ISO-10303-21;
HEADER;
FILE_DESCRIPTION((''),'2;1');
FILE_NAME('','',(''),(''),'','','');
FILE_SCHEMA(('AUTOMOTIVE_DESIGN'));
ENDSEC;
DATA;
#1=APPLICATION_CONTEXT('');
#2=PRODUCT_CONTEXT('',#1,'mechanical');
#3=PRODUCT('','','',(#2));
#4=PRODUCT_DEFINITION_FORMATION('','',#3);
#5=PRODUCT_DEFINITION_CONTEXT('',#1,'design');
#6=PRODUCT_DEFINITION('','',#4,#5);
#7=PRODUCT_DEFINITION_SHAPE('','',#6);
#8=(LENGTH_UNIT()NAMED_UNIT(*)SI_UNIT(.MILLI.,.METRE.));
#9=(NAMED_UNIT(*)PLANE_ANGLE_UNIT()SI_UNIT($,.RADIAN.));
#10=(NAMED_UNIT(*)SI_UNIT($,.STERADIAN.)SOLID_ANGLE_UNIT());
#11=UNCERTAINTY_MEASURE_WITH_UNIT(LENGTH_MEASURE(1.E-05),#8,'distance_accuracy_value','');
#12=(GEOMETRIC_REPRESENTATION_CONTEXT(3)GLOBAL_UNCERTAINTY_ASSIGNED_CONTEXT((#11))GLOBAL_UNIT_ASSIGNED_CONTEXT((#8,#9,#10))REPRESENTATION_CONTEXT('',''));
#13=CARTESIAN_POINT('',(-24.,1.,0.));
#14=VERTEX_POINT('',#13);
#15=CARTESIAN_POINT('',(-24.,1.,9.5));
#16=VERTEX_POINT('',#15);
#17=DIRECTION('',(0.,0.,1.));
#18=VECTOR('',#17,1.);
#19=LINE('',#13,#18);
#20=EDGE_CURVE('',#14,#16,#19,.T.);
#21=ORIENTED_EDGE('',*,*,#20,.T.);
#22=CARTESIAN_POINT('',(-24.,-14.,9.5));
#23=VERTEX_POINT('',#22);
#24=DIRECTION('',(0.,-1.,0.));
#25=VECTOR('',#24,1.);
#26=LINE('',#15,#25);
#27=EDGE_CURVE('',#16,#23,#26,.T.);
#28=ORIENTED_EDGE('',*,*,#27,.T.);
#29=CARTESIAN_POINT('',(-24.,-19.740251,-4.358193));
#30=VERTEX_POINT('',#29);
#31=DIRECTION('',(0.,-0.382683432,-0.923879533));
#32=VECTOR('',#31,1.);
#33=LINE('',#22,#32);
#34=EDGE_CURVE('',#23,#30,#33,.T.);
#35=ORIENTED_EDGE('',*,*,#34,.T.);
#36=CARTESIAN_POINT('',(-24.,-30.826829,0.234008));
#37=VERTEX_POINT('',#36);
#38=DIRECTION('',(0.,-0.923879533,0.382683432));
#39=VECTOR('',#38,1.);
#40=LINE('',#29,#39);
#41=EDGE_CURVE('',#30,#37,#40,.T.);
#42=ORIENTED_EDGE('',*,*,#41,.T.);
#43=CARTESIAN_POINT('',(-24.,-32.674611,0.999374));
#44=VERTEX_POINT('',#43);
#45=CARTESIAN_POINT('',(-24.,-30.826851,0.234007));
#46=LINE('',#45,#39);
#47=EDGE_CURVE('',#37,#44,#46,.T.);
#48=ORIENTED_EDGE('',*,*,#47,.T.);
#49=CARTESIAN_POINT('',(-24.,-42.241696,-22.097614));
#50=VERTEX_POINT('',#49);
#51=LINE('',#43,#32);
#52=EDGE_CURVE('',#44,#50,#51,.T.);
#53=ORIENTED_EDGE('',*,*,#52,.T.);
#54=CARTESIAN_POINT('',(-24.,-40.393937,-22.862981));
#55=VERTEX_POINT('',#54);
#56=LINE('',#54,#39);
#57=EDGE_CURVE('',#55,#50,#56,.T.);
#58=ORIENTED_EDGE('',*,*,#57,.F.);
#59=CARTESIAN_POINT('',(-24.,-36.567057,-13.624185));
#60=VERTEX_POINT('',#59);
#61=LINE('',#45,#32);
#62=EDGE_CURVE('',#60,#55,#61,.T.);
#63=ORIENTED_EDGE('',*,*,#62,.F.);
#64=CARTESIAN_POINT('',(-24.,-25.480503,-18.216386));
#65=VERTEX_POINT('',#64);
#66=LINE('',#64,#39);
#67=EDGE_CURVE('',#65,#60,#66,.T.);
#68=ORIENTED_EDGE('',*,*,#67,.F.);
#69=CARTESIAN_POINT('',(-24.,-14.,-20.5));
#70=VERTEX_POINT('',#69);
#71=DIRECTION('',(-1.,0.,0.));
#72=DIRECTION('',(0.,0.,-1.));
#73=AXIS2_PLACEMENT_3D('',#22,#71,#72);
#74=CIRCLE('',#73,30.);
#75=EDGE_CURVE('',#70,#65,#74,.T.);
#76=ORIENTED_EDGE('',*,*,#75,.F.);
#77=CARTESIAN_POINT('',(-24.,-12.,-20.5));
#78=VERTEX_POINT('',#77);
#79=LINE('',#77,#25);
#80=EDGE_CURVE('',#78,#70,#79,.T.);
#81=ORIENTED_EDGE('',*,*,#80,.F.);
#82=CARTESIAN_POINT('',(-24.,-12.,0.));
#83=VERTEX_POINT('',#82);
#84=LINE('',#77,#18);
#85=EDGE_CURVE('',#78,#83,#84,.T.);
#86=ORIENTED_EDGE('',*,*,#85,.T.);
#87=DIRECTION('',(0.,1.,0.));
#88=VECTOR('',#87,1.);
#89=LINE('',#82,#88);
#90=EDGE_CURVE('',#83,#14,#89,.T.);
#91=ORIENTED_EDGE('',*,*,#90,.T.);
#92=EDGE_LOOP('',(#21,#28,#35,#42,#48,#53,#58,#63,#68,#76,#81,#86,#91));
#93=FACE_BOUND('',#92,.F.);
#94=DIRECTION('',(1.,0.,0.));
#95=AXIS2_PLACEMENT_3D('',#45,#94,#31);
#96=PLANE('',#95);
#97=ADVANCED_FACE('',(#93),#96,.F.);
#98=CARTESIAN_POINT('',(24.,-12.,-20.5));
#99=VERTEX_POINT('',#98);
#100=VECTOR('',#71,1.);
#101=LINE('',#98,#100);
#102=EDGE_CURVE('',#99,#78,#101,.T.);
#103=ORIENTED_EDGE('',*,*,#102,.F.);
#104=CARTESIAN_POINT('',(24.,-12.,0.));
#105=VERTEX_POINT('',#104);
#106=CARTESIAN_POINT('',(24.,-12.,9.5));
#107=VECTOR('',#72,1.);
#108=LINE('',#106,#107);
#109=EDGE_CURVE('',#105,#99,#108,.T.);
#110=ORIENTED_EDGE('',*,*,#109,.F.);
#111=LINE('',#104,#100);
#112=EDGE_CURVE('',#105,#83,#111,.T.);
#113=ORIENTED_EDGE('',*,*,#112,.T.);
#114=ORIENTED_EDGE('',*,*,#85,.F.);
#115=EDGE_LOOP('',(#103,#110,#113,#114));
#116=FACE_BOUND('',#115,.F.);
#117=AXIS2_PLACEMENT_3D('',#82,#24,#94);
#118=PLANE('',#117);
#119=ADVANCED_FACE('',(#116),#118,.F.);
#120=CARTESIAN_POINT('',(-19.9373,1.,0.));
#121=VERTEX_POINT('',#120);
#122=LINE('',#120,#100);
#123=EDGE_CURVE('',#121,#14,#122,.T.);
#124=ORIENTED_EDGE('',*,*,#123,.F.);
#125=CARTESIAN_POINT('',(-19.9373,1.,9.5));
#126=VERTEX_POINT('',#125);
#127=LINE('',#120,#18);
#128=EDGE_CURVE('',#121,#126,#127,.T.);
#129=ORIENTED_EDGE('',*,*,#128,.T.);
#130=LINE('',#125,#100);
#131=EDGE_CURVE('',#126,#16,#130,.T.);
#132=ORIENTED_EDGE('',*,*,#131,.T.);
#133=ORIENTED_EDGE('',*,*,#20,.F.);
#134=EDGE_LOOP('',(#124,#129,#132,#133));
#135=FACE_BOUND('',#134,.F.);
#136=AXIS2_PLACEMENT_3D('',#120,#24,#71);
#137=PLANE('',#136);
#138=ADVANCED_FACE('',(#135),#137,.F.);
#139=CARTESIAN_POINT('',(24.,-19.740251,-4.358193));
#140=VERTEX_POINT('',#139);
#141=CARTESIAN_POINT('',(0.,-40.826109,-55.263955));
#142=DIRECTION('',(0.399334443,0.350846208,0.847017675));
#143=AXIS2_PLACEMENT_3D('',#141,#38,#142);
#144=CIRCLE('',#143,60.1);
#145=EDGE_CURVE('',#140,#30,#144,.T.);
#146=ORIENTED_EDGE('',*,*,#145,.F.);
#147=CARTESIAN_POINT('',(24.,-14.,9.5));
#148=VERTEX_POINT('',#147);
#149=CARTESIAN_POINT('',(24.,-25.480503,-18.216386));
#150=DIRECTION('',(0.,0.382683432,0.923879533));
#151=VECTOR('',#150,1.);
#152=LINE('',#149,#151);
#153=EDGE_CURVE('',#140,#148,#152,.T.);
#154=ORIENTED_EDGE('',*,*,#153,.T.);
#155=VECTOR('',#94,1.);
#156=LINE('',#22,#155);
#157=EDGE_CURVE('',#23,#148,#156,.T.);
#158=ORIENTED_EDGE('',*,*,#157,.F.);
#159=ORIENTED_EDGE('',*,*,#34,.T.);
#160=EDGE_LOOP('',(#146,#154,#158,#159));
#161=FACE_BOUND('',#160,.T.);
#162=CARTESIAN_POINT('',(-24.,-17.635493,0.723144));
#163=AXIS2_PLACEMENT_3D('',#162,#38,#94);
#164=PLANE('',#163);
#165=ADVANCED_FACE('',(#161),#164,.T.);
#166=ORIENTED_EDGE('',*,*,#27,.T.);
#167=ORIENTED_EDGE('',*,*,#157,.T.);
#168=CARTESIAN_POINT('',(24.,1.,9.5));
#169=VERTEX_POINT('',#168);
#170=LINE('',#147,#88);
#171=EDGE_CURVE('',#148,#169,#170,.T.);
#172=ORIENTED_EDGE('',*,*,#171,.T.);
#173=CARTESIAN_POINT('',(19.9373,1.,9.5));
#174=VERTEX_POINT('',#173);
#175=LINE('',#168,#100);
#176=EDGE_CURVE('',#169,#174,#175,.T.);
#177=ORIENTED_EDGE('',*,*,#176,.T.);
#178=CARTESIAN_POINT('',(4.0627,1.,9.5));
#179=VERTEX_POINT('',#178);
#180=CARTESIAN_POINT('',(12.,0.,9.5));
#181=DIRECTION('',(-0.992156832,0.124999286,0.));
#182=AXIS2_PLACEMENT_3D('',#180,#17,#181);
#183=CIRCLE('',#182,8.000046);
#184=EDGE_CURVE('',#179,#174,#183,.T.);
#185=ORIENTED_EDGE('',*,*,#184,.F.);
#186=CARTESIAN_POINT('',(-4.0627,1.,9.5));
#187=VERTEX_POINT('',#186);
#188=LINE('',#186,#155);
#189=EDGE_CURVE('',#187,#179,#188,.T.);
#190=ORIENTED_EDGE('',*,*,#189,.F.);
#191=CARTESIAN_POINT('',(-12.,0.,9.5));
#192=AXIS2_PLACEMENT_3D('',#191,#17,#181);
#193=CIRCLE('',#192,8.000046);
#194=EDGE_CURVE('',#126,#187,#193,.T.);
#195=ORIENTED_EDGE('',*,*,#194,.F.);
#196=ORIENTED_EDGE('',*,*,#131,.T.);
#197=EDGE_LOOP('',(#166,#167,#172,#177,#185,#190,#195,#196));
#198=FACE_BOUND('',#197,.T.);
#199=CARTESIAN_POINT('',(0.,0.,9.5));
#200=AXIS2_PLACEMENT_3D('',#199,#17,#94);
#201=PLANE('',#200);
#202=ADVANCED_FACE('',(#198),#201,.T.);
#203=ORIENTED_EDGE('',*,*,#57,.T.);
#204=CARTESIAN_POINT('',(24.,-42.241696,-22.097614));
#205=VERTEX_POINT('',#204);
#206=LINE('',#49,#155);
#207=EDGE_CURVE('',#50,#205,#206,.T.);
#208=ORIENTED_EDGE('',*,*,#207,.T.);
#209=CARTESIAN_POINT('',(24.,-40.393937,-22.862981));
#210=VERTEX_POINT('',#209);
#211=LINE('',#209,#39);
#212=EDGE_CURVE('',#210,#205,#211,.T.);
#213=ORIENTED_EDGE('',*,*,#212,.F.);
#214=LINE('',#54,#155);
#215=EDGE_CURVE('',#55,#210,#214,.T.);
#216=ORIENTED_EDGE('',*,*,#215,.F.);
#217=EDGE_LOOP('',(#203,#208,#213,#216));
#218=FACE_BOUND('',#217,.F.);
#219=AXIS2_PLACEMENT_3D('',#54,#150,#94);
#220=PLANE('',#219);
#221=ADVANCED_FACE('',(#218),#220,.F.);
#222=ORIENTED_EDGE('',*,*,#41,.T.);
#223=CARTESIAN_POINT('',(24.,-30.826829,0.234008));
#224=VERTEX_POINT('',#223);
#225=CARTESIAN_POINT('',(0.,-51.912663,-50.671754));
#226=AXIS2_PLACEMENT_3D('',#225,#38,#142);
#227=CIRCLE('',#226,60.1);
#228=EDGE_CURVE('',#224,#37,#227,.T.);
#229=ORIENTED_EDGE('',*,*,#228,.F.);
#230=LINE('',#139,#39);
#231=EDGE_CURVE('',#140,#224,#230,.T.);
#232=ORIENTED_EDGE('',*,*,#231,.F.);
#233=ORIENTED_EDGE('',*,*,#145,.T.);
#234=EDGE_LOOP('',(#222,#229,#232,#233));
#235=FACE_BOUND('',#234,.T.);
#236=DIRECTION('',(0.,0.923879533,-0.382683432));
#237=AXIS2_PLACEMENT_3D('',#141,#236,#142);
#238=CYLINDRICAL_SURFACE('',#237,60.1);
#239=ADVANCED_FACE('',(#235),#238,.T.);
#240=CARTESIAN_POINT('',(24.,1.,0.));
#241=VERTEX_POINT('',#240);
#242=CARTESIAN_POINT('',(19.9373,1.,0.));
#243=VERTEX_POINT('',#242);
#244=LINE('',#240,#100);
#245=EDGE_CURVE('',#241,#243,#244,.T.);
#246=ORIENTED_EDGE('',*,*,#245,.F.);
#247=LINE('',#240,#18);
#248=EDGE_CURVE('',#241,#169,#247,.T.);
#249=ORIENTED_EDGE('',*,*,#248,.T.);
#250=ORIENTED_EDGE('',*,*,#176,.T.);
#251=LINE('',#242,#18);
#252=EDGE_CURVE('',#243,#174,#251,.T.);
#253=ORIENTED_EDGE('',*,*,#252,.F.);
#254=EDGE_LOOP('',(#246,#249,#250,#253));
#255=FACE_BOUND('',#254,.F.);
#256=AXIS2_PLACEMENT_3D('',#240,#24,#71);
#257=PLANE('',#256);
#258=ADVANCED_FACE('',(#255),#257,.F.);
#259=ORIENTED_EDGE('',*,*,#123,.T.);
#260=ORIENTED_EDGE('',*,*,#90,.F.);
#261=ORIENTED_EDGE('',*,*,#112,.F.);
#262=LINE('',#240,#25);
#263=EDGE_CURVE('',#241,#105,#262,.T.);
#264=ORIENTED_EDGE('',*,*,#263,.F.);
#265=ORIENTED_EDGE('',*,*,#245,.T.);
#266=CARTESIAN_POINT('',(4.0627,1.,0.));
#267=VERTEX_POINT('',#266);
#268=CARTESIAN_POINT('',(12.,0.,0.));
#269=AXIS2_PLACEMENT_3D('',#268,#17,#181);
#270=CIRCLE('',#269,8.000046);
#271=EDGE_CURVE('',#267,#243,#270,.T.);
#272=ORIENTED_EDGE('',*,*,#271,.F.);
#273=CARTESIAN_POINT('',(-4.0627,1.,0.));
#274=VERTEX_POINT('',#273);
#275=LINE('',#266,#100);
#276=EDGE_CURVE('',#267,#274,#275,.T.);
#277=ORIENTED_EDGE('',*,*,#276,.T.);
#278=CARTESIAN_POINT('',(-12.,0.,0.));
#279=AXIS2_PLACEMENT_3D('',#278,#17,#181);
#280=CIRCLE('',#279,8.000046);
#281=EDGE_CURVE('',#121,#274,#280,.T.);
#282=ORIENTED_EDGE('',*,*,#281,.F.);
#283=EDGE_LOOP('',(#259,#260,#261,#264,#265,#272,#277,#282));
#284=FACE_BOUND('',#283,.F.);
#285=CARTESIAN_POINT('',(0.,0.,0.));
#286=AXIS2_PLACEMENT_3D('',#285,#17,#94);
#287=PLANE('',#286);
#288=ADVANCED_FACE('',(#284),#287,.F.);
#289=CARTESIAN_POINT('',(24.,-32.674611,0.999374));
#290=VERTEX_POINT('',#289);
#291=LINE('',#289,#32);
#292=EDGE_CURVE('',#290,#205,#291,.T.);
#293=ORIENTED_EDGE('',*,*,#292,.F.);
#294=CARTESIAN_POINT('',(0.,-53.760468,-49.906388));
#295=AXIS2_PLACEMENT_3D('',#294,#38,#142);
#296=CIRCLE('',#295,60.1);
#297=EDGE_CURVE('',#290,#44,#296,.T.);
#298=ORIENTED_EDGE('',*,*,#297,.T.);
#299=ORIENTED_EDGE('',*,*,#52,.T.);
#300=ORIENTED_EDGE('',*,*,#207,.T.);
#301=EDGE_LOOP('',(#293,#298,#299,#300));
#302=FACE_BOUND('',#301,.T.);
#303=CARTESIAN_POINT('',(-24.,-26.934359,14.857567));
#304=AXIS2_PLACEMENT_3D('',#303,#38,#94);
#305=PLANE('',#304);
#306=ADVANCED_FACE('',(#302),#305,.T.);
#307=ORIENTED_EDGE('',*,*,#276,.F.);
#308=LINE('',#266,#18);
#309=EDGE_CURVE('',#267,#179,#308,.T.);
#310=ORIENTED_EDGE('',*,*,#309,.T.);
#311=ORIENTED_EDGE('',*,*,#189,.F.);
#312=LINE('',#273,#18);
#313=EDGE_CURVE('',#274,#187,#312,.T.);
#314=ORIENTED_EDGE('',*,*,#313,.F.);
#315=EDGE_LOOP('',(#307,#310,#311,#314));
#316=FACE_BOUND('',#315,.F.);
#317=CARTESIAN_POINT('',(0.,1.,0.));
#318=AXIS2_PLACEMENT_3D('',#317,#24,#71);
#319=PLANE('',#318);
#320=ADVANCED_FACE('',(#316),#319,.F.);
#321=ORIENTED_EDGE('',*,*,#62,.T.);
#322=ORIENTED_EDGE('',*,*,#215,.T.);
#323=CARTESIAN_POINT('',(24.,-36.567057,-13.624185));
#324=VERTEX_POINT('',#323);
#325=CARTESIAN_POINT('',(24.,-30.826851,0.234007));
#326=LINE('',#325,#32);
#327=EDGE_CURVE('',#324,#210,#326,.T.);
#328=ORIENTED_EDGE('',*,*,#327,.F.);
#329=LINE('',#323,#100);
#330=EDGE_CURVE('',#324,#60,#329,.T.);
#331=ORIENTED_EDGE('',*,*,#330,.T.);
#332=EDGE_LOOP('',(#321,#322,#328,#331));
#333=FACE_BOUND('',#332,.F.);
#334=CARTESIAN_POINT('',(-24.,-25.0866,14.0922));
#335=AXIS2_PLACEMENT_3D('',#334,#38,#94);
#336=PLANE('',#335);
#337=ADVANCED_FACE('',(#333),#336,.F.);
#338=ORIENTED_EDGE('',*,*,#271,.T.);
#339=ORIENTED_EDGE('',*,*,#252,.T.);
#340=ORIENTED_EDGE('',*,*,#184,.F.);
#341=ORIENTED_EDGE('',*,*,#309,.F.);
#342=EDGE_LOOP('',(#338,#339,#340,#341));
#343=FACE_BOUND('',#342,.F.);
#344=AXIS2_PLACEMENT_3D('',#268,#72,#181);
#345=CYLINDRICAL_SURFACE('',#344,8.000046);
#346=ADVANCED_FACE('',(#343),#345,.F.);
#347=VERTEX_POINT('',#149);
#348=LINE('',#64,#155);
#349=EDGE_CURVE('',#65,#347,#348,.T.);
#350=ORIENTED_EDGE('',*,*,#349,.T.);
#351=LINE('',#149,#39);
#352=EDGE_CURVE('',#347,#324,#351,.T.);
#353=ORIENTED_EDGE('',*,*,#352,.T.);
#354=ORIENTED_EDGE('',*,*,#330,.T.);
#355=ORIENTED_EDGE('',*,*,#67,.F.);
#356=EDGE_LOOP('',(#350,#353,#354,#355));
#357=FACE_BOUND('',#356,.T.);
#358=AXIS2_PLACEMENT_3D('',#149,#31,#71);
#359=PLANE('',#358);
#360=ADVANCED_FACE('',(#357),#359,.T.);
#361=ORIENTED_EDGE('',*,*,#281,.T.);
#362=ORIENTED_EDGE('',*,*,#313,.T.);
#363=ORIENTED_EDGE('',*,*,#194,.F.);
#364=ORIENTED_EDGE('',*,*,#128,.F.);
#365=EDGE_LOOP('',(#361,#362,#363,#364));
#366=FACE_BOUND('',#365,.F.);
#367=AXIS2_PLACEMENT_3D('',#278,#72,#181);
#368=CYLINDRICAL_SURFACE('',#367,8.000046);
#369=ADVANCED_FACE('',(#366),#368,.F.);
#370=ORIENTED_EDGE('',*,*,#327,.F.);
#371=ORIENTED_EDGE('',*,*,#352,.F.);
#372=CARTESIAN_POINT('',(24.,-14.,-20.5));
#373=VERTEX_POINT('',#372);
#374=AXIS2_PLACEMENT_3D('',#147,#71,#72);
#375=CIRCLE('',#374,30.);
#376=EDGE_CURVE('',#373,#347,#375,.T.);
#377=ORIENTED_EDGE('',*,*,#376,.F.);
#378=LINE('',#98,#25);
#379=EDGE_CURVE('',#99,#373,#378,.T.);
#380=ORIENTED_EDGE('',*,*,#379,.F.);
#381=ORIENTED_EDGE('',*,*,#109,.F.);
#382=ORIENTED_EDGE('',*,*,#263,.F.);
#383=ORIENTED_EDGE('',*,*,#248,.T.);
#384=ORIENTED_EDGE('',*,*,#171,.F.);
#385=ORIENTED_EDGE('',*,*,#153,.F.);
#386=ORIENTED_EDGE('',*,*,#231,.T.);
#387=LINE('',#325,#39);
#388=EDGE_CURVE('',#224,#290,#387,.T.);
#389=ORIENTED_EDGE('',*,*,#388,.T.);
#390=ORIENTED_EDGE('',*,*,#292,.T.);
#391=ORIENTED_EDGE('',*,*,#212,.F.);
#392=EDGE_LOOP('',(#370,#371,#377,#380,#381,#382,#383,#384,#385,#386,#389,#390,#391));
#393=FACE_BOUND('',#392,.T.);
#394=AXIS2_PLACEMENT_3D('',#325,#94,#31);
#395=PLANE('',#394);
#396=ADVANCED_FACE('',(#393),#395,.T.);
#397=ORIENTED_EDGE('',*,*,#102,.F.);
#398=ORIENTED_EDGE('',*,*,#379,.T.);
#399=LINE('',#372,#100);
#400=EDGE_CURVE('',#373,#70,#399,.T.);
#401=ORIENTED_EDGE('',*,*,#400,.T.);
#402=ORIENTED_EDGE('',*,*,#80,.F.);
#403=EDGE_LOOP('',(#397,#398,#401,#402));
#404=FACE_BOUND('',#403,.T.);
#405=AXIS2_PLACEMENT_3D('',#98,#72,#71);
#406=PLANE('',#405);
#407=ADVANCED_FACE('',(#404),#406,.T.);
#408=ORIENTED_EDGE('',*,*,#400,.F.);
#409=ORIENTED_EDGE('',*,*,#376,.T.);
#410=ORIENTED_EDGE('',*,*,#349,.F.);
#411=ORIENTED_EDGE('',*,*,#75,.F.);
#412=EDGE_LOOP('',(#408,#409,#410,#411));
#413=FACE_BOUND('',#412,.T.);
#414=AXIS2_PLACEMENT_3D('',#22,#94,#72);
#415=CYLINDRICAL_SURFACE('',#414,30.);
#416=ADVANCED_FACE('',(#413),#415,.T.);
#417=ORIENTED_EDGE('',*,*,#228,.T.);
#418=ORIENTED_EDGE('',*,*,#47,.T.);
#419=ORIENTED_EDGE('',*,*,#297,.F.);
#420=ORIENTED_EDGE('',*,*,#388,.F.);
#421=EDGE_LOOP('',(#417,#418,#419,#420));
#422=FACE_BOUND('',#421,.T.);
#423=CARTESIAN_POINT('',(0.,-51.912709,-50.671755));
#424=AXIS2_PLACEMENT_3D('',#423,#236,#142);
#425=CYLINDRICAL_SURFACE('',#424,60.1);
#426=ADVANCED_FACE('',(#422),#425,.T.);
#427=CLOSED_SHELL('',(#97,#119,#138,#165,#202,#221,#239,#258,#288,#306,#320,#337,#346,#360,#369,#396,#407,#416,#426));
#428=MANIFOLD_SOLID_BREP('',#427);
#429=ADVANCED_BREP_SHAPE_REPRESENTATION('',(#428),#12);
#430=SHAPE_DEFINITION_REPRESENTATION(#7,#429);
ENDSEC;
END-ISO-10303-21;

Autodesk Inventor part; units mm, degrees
ref_plane "YZ Plane" through (0, 0, 0) normal (1, 0, 0) x (0, 1, 0)
ref_plane "XZ Plane" through (0, 0, 0) normal (0, 1, 0) x (-1, 0, 0)
ref_plane "XY Plane" through (0, 0, 0) normal (0, 0, 1) x (1, 0, 0)
sketch "Sketch1" plane through (0, 0, 0) normal (0, 0, 1) x (1, 0, 0)
  arc A0 (-19.9373, 1) -> (-4.0627, 1) centre (-12, 0) ccw
  arc A1 (4.0627, 1) -> (19.9373, 1) centre (12, 0) ccw
  line L0 (0, 1) -> (-4.0627, 1)
  line L1 (0, 1) -> (4.0627, 1)
  line L2 (-24, 0) -> (-24, 1)
  line L3 (-19.9373, 1) -> (-24, 1)
  line L4 (24, 0) -> (24, 1)
  line L5 (24, 1) -> (19.9373, 1)
  line L6 (24, 0) -> (24, -12)
  line L7 (24, -12) -> (-24, -12)
  line L8 (-24, -12) -> (-24, 0)
  line L9 (24, 1) -> (24, -12)
  line L10 (24, -12) -> (-24, -12)
  line L11 (-24, -12) -> (-24, 1)
  line L12 (-24, 1) -> (-19.9373, 1)
  line L13 (-4.0627, 1) -> (4.0627, 1)
  line L14 (19.9373, 1) -> (24, 1)
  point P0 (0, 0)
  dimension "d4" = 12
  dimension "d5" = 12
  dimension "d6" = 1
  dimension "d7" = 12
extrude "Extrusion1" add sketch "Sketch1" along normal blind 9.5
sketch "Sketch2" plane through (-24, -12, 0) normal (0, -1, 0) x (1, 0, 0)
  line L0 (0, 9.5) -> (48, 9.5) projected
  line L1 (0, 9.5) -> (48, 9.5)
  line L2 (48, 9.5) -> (48, -20.5)
  line L3 (48, -20.5) -> (0, -20.5)
  line L4 (0, -20.5) -> (0, 9.5)
  point P0 (24, 0)
  dimension "d10" = 30
extrude "Extrusion2" add sketch "Sketch2" along normal blind 2
sketch "Sketch3" plane through (-24, -14, 0) normal (0, -1, 0) x (1, 0, 0)
  line L0 (48, 9.5) -> (0, 9.5) projected
  line L1 (0, 9.5) -> (0, -20.5) projected
  line L2 (0, -20.5) -> (48, -20.5) projected
  line L3 (48, -20.5) -> (48, 9.5) projected
  point P0 (24, 0)
revolve "Revolution1" add sketch "Sketch3" angle 22.5 about axis through (24, -14, 9.5) along (-1, 0, 0)
sketch "Sketch4" plane through (-24, -14, 9.5) normal (0, -0.9238795, 0.3826834) x (1, 0, 0)
  line L0 (48, -27.7164) -> (48, -30) projected
  line L1 (48, -30) -> (0, -30)
  line L2 (0, -30) -> (0, -15)
  line L3 (48, -15) -> (48, -30)
  line L4 (48, -8.0115) -> (48, -26.951) projected
  line L5 (0, -26.951) -> (0, -8.0115) projected
  arc A0 (48, -15) -> (0, -15) centre (24, -70.1) ccw
  point P0 (24, -3.4193)
extrude "Extrusion3" add sketch "Sketch4" along normal blind 12
sketch "Sketch5" plane through (-24, -25.0866, 14.0922) normal (0, -0.9238795, 0.3826834) x (1, 0, 0)
  arc A0 (48, -15) -> (0, -15) centre (24, -70.1) ccw projected
  arc A1 (48, -15) -> (0, -15) centre (24, -70.1) ccw
  line L0 (48, -15) -> (48, -40)
  line L1 (0, -15) -> (0, -40)
  line L2 (0, -40) -> (48, -40)
  point P0 (24, -3.4193)
  dimension "d19" = 25
  dimension "d20" = 25
extrude "Extrusion4" add sketch "Sketch5" along normal blind 2
properties part number "HatSensorMount03FB"
